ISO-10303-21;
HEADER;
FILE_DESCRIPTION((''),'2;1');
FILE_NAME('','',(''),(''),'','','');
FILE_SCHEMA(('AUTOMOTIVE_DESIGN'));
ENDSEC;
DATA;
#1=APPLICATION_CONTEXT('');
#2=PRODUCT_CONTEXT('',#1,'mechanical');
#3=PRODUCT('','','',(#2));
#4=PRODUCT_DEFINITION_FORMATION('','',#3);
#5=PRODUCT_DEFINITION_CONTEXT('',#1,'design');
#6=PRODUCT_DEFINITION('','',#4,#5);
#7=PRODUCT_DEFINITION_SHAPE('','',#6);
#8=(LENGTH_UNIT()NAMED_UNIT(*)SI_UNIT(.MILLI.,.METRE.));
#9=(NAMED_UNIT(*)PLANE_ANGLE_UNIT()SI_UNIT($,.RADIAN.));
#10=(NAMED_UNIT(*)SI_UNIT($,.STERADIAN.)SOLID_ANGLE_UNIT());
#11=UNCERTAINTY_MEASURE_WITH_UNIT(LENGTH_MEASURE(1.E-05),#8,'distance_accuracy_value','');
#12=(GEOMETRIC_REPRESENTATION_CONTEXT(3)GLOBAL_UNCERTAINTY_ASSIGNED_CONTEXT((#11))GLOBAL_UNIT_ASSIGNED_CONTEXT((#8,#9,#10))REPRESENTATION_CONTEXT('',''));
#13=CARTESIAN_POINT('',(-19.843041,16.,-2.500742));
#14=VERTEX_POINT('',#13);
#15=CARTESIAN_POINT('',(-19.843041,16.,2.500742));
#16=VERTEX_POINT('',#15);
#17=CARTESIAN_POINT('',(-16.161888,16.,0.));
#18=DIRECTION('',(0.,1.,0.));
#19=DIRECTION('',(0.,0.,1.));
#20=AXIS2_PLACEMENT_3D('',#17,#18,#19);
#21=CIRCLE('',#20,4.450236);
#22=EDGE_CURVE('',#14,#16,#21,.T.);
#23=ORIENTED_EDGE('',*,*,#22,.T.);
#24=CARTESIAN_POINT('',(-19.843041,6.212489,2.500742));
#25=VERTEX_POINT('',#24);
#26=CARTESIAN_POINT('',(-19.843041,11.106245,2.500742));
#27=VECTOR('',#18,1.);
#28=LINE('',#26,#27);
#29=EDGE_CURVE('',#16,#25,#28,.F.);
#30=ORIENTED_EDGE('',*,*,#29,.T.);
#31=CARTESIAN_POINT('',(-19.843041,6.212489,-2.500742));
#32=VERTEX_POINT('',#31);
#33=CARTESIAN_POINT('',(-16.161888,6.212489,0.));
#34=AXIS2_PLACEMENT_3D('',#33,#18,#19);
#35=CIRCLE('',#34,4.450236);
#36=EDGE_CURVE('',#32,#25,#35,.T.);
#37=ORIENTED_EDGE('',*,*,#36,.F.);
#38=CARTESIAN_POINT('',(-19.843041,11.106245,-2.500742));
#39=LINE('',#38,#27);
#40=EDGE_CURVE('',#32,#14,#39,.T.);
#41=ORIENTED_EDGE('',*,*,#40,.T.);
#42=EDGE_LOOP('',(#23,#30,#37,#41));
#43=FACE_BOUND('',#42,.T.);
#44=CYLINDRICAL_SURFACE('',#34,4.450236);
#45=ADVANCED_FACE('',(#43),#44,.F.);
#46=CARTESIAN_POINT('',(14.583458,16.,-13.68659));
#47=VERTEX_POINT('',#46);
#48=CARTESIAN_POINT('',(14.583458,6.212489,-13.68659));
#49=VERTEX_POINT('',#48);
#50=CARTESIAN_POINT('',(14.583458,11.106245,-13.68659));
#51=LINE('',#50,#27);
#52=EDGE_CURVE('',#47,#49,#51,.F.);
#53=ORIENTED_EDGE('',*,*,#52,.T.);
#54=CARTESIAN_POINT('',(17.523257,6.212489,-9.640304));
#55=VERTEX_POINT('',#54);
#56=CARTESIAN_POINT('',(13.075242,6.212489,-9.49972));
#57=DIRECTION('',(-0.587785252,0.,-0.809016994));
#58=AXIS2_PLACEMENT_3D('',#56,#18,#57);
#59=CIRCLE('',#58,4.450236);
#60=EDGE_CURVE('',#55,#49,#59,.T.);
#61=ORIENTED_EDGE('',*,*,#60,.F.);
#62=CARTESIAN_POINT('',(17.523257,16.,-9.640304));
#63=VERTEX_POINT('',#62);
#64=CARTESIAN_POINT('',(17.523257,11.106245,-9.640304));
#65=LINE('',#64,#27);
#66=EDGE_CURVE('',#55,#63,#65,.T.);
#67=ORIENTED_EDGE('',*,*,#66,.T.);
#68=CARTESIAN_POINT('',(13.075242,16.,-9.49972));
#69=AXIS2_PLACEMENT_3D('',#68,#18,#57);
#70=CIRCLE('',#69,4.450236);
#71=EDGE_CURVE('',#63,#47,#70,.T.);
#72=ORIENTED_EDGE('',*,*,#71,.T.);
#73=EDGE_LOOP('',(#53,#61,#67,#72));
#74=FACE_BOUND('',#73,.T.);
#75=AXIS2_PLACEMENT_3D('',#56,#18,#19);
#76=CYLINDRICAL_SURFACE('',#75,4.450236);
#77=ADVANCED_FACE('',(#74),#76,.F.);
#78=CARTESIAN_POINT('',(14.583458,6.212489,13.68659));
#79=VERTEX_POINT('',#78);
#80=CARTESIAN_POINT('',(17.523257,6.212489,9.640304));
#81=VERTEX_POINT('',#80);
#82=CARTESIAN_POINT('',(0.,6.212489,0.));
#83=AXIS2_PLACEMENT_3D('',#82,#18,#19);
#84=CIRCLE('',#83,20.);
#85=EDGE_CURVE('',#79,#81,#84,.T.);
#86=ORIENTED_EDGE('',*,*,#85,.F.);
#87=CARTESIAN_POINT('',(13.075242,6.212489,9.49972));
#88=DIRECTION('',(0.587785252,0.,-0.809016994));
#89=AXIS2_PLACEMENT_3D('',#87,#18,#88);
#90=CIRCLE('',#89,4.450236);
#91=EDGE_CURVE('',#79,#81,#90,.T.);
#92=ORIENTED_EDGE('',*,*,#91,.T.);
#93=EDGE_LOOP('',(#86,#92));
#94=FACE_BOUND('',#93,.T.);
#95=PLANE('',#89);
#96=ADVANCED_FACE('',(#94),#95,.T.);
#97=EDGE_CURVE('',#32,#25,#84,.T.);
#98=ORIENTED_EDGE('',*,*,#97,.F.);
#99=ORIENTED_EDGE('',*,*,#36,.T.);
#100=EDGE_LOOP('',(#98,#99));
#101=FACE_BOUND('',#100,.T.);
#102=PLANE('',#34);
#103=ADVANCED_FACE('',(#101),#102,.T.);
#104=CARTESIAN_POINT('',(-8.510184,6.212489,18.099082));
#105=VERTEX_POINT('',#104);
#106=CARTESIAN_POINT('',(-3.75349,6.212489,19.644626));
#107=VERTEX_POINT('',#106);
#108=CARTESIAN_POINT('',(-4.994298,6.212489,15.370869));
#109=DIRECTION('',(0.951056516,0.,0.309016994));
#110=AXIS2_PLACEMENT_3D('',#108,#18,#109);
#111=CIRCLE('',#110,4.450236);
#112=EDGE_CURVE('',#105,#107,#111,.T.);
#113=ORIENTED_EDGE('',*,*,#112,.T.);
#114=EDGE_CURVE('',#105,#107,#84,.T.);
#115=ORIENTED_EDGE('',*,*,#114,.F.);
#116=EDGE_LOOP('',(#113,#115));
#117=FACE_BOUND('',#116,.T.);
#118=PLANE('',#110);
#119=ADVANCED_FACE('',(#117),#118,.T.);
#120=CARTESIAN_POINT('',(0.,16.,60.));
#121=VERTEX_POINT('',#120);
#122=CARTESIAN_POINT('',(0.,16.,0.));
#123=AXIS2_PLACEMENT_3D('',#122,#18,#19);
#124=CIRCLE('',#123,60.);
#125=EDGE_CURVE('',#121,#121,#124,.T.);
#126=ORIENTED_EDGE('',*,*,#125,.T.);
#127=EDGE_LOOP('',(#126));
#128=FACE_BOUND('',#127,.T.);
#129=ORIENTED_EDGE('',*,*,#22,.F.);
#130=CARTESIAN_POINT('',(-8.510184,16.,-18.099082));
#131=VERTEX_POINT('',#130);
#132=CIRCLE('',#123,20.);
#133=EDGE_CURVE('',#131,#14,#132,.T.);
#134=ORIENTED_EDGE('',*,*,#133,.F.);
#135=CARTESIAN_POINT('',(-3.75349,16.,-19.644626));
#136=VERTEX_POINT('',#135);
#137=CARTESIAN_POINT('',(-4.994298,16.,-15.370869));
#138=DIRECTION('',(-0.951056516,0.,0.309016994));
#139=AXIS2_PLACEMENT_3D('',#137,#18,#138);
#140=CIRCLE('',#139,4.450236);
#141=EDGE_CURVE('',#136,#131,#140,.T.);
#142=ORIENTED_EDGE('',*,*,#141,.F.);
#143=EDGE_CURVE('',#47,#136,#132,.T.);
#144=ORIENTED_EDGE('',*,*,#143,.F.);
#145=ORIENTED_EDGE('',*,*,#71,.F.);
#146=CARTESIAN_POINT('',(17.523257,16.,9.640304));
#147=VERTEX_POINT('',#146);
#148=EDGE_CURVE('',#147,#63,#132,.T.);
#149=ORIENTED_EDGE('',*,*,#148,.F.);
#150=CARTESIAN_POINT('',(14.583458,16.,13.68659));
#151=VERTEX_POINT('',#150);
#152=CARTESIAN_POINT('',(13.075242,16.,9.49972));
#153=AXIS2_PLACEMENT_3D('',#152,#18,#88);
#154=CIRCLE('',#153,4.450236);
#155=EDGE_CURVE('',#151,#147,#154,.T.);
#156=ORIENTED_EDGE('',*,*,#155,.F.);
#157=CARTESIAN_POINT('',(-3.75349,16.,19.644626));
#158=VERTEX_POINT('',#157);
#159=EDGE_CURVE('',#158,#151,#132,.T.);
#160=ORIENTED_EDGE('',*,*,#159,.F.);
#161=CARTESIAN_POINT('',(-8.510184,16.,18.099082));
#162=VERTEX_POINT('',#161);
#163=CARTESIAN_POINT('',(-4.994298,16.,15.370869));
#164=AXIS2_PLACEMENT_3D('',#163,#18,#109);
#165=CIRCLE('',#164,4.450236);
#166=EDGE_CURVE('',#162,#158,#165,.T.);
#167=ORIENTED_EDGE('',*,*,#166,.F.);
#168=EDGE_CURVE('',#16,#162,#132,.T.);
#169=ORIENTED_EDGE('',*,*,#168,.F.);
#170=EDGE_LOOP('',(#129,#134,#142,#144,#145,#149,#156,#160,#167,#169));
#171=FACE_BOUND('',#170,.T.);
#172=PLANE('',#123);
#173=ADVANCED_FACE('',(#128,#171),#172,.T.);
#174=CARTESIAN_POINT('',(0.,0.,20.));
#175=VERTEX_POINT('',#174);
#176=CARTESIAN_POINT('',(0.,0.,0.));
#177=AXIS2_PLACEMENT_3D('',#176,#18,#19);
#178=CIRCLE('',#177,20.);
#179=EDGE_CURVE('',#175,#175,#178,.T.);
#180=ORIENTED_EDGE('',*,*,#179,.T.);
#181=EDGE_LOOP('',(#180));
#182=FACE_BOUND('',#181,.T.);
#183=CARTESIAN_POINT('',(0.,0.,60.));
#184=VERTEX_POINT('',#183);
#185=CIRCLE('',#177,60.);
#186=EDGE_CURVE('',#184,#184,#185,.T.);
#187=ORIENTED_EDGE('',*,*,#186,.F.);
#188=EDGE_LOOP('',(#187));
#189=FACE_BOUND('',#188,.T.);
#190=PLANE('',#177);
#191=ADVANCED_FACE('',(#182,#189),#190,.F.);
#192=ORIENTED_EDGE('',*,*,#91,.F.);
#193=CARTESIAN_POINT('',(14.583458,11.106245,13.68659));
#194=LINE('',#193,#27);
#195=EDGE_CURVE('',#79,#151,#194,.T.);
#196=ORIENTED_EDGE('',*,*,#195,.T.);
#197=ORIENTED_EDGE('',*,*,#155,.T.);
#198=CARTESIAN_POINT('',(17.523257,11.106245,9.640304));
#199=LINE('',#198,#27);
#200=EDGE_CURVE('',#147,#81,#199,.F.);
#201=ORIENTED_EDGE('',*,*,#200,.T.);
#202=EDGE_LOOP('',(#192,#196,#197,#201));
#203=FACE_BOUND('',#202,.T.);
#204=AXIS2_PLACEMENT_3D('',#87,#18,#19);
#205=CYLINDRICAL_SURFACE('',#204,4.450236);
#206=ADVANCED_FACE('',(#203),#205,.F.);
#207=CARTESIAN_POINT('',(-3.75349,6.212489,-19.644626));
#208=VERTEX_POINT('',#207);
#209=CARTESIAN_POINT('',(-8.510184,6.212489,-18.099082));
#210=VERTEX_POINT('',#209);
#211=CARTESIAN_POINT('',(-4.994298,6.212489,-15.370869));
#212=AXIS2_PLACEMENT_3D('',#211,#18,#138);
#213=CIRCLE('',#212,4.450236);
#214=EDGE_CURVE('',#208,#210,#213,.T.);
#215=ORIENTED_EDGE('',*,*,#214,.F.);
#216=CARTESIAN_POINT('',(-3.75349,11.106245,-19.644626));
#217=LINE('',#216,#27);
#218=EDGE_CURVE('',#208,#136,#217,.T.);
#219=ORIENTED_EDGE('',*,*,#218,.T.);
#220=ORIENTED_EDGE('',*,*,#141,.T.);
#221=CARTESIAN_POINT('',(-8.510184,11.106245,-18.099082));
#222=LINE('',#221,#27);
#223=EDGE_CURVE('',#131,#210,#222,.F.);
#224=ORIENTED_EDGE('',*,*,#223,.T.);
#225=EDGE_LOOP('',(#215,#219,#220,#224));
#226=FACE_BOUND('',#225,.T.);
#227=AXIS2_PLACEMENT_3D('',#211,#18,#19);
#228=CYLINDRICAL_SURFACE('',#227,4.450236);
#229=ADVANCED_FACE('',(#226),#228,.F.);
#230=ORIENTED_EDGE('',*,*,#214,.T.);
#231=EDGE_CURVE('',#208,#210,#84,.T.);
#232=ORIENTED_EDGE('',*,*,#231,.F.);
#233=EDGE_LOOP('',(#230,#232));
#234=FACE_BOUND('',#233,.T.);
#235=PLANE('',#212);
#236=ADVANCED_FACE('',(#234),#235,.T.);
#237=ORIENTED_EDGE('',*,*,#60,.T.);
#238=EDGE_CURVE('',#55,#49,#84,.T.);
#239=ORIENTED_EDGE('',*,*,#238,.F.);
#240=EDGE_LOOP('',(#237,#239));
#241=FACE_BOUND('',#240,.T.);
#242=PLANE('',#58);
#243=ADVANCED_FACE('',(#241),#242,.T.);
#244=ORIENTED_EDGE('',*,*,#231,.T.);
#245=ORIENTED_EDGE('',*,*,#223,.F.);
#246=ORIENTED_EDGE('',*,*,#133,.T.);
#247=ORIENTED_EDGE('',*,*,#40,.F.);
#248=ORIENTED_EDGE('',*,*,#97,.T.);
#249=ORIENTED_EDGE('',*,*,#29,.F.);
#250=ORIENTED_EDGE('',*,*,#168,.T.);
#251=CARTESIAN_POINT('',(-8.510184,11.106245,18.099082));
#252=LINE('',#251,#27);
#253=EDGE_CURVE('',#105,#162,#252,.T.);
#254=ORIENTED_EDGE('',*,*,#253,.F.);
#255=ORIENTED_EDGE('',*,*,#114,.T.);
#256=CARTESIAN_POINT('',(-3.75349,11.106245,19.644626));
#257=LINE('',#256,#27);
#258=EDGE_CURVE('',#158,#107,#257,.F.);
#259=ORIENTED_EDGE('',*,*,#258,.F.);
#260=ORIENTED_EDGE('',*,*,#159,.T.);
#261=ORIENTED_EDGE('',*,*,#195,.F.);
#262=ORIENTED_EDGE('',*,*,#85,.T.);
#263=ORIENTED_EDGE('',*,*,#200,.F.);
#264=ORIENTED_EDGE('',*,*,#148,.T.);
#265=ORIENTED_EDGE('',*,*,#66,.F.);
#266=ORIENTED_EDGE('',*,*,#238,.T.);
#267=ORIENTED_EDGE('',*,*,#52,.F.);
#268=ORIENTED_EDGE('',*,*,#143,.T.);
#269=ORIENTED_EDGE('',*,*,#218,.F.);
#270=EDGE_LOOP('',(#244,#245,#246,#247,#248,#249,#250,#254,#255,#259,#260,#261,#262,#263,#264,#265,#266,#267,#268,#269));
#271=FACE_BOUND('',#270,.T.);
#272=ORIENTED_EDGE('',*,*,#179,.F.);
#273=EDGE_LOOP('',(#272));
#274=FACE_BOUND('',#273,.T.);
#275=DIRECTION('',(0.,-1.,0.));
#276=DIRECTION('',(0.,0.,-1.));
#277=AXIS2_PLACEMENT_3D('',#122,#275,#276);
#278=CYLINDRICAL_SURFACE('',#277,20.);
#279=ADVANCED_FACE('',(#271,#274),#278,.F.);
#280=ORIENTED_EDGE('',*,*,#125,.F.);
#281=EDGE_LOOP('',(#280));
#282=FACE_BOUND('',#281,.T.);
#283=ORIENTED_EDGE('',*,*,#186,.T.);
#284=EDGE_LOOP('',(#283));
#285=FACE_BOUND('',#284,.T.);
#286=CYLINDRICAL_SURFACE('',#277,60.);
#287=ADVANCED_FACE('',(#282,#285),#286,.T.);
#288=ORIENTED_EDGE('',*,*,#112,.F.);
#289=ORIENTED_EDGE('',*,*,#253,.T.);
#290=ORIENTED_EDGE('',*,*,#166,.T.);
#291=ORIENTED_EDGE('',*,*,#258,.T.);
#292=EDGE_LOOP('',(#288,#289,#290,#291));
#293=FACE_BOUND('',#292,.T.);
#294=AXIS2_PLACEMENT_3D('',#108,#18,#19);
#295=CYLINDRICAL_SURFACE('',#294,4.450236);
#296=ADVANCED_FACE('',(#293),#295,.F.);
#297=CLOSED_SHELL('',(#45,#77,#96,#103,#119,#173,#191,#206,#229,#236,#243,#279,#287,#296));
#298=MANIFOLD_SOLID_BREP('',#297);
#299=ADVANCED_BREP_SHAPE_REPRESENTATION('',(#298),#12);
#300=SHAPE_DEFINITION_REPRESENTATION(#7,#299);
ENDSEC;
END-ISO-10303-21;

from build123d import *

# Parameters (mm, degrees)
SKETCH1_R           = 60
BOSS_EXTRUDE1_DEPTH = 16
SKETCH2_R           = 20
CUT_EXTRUDE1_DEPTH  = 87.34813258
SKETCH3_R           = 4.450235628
CUT_EXTRUDE2_DEPTH  = 9.787510627
CIRPATTERN1_COUNT   = 5


with BuildPart() as part:
    # Sketch1 → Boss-Extrude1 (new body)
    with BuildSketch(Plane(origin=(0, 0, 0), x_dir=(1, 0, 0), z_dir=(0, 1, 0))):
        Circle(SKETCH1_R)
    extrude(amount=BOSS_EXTRUDE1_DEPTH)

    # Sketch2 → Cut-Extrude1 (cut, through all)
    with BuildSketch(Plane(origin=(0, 0, 0), x_dir=(1, 0, 0), z_dir=(0, 1, 0))):
        Circle(SKETCH2_R)
    extrude(amount=CUT_EXTRUDE1_DEPTH, mode=Mode.SUBTRACT)

    # Sketch3 → Cut-Extrude2 (cut)
    with BuildSketch(Plane(origin=(0, 16, 0), x_dir=(1, 0, 0), z_dir=(0, 1, 0))):
        with Locations((-16.161888494, 0)):
            Circle(SKETCH3_R)
    cut_extrude2 = extrude(amount=-CUT_EXTRUDE2_DEPTH, mode=Mode.SUBTRACT)

    # CirPattern1: Cut-Extrude2 ×5 about axis
    cirpattern1_axis = Axis((0, 0, 0), (0, 1, 0))
    for i in range(1, CIRPATTERN1_COUNT):
        add(cut_extrude2.rotate(cirpattern1_axis, i * 360 / CIRPATTERN1_COUNT), mode=Mode.SUBTRACT)


solid = part.part
